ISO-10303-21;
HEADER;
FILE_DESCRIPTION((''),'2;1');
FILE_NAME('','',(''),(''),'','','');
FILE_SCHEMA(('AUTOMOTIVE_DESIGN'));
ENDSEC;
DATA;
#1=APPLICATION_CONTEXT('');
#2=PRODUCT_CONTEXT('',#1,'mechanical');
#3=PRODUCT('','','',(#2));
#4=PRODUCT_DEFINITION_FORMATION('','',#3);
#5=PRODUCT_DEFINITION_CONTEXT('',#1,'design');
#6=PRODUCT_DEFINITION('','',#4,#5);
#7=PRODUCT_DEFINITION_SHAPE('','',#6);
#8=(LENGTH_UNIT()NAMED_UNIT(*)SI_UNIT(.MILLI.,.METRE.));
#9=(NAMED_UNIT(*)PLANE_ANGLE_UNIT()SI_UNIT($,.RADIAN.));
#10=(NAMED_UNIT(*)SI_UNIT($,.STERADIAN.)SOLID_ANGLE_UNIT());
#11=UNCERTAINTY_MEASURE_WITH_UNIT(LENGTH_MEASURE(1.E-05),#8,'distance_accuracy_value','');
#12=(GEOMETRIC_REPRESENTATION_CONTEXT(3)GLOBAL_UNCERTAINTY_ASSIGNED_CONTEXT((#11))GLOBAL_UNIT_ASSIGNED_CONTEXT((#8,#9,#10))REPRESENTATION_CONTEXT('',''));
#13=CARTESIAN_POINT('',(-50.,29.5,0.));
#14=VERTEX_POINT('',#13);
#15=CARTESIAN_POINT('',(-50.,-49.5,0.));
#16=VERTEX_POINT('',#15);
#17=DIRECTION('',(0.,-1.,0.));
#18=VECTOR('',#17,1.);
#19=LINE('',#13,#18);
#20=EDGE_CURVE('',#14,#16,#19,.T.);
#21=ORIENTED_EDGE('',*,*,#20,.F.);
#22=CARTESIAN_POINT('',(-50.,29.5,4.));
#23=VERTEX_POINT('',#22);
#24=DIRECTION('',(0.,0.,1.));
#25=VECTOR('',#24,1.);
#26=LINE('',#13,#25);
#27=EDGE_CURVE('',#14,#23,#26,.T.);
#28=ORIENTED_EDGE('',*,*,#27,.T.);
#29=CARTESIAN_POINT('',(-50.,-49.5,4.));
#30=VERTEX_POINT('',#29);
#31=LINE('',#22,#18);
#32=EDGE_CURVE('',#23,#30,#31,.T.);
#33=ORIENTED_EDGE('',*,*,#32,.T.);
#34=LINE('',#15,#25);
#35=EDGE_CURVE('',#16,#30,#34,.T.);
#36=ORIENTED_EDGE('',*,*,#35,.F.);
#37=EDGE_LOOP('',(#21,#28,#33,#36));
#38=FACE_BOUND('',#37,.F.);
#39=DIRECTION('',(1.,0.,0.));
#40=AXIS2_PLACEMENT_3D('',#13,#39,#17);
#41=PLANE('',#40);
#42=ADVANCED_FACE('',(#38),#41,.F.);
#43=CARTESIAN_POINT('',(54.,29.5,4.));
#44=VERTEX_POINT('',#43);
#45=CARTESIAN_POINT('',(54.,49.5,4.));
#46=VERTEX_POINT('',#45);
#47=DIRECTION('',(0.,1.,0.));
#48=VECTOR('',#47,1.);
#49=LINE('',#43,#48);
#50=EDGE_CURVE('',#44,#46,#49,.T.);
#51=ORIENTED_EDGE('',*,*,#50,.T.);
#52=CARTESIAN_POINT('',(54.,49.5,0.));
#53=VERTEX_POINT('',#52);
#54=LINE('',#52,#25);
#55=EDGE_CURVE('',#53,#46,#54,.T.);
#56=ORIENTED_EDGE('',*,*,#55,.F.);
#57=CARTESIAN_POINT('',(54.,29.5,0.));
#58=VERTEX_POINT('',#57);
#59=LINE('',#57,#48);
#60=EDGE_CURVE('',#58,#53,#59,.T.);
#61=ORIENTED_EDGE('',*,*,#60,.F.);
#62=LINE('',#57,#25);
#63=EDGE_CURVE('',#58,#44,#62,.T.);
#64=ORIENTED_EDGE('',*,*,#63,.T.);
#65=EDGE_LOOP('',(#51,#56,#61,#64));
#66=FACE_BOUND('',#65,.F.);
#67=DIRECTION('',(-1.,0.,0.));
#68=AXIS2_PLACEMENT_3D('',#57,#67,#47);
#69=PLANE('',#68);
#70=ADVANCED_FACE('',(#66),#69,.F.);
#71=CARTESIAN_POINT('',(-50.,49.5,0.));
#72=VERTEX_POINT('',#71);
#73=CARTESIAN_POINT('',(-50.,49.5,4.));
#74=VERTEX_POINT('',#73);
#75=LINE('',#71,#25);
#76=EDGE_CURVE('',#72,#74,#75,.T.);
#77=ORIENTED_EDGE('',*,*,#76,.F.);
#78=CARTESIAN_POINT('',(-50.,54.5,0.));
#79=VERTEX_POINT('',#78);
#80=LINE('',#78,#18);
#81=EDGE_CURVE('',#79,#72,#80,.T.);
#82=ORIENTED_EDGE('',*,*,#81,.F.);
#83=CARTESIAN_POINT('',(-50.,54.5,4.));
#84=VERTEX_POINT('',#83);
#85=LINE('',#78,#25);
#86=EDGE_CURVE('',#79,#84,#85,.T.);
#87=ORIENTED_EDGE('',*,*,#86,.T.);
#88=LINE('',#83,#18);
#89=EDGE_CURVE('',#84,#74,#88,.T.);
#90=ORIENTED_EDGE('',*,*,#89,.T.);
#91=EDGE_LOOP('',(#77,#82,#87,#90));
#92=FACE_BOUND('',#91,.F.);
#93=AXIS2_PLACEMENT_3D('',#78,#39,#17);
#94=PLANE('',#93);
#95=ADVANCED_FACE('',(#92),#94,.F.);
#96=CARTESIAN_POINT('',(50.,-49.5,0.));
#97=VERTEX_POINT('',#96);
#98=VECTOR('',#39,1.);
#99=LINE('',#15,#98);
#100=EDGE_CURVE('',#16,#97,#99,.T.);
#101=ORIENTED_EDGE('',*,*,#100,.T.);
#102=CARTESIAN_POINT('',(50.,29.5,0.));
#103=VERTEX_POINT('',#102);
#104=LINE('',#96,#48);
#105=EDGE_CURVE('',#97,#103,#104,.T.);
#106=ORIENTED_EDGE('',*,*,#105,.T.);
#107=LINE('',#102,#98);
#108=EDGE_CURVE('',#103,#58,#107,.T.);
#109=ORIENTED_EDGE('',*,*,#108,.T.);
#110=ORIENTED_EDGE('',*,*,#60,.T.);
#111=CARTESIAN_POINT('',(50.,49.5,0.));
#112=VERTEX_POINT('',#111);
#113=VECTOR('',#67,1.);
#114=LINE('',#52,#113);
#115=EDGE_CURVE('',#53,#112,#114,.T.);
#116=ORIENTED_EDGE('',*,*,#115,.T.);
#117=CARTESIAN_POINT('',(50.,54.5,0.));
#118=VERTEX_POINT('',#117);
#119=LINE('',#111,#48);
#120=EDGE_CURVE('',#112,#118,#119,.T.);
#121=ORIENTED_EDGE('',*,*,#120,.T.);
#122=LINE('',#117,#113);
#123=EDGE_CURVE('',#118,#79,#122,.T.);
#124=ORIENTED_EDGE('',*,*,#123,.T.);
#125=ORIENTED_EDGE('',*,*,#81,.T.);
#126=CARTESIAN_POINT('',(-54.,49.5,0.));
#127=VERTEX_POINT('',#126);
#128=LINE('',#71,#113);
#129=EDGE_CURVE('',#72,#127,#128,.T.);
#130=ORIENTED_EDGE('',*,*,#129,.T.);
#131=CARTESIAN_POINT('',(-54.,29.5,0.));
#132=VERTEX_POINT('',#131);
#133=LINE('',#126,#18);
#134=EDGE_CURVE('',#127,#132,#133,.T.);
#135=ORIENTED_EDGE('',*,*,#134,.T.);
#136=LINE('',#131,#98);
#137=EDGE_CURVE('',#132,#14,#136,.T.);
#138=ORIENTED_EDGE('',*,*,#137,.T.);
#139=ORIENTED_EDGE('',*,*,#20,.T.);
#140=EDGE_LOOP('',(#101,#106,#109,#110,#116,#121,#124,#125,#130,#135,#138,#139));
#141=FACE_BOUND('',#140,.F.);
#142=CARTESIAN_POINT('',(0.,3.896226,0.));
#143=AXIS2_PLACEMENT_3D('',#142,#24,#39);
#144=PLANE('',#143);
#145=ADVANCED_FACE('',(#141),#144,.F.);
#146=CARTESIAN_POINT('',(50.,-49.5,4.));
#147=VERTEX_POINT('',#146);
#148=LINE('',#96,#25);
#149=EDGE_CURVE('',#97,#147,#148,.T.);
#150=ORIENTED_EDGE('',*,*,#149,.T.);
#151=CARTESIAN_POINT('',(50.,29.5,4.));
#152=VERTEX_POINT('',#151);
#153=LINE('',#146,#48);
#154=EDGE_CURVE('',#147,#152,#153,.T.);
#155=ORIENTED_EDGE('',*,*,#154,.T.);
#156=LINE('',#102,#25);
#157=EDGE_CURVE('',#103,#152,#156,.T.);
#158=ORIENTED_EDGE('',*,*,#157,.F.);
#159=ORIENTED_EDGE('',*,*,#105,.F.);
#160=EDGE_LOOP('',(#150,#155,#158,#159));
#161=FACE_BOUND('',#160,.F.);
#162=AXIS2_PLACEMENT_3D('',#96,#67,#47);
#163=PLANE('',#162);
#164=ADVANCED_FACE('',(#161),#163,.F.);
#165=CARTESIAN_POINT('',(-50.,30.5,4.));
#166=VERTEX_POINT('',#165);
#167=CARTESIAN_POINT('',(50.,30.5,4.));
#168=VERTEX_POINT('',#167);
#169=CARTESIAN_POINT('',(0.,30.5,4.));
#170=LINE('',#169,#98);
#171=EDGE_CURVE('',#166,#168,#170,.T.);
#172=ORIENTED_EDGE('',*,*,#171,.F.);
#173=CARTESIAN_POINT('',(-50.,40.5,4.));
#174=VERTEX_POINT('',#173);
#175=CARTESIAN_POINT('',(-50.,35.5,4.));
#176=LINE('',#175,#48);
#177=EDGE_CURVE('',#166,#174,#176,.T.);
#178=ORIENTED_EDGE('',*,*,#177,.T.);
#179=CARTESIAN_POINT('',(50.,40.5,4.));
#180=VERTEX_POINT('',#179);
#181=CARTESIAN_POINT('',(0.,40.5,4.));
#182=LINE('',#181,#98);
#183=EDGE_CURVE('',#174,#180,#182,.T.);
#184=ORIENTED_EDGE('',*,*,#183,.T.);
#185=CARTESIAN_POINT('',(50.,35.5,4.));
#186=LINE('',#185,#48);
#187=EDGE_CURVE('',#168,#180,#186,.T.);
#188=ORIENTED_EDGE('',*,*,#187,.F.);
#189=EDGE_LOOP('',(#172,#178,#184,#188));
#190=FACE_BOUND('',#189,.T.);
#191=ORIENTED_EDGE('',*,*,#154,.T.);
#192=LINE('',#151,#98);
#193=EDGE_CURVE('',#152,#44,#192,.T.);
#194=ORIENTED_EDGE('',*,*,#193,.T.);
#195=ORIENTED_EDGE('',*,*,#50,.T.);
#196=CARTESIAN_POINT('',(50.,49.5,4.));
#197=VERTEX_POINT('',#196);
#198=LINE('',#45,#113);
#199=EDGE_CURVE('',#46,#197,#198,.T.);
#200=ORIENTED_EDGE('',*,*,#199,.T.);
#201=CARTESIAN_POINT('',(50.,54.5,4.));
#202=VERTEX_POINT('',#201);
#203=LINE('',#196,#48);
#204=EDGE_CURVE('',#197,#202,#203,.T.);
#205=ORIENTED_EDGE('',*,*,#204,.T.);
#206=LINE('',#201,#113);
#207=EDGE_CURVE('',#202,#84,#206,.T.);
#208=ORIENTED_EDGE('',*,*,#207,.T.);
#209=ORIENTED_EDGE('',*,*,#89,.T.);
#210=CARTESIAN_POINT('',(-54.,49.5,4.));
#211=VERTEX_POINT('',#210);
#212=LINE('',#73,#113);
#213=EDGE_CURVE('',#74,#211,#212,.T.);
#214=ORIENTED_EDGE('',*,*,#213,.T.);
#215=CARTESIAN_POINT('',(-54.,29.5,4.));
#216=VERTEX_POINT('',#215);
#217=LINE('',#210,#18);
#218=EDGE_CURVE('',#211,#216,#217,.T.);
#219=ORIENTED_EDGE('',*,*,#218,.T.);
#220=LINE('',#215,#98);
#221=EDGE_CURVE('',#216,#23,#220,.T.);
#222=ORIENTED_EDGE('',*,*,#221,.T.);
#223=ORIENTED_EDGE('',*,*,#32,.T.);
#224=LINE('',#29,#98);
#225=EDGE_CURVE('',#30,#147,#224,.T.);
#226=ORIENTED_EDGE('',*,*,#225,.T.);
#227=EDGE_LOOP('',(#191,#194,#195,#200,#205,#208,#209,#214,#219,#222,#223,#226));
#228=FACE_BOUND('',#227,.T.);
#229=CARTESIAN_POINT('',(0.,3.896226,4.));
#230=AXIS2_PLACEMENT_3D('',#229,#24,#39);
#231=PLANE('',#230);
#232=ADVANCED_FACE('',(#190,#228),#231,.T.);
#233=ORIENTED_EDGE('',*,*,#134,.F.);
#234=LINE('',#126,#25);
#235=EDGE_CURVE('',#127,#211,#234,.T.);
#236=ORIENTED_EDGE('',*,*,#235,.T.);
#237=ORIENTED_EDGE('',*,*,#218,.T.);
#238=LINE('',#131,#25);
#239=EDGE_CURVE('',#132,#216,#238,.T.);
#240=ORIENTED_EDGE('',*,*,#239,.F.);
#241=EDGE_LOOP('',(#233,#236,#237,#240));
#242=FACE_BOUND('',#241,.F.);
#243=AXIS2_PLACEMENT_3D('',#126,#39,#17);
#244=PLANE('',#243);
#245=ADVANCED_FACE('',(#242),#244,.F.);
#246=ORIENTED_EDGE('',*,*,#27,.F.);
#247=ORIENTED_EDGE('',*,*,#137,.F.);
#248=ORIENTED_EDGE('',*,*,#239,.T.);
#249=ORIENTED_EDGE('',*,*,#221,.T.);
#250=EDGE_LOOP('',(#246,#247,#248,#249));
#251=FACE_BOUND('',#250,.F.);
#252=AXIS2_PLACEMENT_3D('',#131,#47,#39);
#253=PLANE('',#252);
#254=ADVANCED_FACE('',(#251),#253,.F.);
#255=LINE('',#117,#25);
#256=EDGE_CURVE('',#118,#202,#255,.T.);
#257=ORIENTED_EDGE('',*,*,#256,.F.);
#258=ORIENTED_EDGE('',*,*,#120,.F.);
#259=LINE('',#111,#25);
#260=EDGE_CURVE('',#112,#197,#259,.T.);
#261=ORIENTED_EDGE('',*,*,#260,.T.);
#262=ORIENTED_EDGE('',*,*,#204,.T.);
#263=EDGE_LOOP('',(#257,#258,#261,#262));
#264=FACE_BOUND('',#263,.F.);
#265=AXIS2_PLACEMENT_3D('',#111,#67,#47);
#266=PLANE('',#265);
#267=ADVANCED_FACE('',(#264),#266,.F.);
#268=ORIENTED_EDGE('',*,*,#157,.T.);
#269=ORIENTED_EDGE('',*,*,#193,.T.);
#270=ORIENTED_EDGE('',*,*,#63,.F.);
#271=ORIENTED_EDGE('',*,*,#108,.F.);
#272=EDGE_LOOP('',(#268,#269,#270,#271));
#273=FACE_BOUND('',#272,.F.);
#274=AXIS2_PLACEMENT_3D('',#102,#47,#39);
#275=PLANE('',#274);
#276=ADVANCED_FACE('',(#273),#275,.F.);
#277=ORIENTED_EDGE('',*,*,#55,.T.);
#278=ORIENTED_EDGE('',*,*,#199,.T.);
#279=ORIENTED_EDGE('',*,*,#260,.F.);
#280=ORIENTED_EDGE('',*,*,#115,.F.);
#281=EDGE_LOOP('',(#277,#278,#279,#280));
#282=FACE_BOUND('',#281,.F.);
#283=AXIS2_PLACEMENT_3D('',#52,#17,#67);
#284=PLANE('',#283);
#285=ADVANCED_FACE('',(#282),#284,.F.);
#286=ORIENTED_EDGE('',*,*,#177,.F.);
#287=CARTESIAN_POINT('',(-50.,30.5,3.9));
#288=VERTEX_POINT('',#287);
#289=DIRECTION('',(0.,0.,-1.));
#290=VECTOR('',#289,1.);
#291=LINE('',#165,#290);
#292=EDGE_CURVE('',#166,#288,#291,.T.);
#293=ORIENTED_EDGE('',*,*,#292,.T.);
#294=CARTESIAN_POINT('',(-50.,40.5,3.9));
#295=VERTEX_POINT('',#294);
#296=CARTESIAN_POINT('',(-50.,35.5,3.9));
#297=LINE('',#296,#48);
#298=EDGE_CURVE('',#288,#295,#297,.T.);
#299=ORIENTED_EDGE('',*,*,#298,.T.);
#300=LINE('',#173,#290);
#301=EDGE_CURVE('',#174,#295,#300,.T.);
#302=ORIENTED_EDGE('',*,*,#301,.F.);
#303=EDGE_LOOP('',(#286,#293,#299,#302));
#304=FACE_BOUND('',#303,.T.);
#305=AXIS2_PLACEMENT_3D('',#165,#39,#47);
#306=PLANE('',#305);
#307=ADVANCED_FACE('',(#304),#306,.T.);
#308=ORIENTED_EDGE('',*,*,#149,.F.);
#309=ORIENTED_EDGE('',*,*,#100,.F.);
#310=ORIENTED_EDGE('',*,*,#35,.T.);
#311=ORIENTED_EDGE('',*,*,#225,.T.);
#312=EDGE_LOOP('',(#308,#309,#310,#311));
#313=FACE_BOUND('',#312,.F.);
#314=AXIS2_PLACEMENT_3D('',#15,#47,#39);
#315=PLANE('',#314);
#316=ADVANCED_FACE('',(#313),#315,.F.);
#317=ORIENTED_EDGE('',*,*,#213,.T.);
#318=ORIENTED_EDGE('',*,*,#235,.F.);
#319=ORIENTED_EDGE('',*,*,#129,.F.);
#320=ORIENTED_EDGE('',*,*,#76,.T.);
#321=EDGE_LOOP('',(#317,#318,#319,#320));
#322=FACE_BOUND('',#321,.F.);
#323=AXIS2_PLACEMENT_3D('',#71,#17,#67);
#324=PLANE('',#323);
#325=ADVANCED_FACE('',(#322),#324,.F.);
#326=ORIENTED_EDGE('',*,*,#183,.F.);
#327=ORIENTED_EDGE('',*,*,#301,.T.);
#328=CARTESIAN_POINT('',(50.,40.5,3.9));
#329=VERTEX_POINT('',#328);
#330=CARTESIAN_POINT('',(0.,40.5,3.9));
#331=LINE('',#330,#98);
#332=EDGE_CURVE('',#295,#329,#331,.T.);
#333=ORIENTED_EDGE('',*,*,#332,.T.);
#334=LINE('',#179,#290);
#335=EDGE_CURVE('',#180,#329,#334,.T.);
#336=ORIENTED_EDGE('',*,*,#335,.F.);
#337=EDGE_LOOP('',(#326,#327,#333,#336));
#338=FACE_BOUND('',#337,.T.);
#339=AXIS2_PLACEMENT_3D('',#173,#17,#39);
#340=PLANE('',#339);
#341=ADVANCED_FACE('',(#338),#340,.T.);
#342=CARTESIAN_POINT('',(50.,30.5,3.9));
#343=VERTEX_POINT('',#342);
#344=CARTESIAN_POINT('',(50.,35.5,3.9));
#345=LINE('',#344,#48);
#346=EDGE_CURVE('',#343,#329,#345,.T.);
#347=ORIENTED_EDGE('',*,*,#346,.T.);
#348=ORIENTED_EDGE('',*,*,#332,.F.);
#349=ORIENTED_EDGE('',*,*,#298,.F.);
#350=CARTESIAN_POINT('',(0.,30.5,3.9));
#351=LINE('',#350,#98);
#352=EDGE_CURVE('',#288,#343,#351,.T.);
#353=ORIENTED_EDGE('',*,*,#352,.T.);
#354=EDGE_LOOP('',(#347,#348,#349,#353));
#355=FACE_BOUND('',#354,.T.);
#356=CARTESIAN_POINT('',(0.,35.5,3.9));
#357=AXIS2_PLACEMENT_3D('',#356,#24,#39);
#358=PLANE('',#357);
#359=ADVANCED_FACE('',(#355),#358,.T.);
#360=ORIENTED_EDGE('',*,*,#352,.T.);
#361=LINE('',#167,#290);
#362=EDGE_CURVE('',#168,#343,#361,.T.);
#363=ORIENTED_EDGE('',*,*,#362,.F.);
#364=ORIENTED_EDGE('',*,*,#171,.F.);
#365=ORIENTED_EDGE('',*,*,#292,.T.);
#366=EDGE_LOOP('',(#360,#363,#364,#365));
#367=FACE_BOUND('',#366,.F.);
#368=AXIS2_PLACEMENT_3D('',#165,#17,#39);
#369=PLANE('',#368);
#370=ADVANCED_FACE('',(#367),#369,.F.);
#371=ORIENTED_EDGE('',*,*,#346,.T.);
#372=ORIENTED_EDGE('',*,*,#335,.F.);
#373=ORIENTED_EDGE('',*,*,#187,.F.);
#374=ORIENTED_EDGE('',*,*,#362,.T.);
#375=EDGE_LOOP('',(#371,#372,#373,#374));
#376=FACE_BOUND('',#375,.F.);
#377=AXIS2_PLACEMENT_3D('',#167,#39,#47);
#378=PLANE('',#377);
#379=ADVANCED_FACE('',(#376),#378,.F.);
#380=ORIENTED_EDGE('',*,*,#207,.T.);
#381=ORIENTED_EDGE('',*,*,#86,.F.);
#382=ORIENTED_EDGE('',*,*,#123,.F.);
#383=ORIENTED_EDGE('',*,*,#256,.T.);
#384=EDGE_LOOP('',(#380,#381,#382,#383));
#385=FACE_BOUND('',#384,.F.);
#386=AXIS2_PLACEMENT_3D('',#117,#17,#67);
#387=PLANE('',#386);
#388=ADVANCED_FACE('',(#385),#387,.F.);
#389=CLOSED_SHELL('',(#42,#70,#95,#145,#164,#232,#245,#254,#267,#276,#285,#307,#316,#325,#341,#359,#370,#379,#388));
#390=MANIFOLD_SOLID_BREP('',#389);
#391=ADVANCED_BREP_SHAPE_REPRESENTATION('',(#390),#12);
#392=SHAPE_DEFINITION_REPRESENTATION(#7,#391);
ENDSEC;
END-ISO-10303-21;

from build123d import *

# Parameters (mm, degrees)
F1_DEPTH = 4
F2_W     = 100
F2_H     = 10
F3_DEPTH = 0.1


# Not quite as in the source:
# - a feature names something its author has since deleted; it is built from what else it names


with BuildPart() as f1:
    # F0 (on Top) → F1 (new body)
    with BuildSketch(Plane.XY):
        Polygon((-50, -49.5), (50, -49.5), (50, 29.5), (54, 29.5), (54, 49.5), (50, 49.5), (50, 54.5), (-50, 54.5), (-50, 49.5), (-54, 49.5), (-54, 29.5), (-50, 29.5), align=None)
    extrude(amount=F1_DEPTH)

    # F2 (on face) → F3 (cut)
    with BuildSketch(Plane.XY.offset(4)):
        with Locations((0, 35.5)):
            Rectangle(F2_W, F2_H)
    extrude(amount=-F3_DEPTH, mode=Mode.SUBTRACT)


solid = f1.part
